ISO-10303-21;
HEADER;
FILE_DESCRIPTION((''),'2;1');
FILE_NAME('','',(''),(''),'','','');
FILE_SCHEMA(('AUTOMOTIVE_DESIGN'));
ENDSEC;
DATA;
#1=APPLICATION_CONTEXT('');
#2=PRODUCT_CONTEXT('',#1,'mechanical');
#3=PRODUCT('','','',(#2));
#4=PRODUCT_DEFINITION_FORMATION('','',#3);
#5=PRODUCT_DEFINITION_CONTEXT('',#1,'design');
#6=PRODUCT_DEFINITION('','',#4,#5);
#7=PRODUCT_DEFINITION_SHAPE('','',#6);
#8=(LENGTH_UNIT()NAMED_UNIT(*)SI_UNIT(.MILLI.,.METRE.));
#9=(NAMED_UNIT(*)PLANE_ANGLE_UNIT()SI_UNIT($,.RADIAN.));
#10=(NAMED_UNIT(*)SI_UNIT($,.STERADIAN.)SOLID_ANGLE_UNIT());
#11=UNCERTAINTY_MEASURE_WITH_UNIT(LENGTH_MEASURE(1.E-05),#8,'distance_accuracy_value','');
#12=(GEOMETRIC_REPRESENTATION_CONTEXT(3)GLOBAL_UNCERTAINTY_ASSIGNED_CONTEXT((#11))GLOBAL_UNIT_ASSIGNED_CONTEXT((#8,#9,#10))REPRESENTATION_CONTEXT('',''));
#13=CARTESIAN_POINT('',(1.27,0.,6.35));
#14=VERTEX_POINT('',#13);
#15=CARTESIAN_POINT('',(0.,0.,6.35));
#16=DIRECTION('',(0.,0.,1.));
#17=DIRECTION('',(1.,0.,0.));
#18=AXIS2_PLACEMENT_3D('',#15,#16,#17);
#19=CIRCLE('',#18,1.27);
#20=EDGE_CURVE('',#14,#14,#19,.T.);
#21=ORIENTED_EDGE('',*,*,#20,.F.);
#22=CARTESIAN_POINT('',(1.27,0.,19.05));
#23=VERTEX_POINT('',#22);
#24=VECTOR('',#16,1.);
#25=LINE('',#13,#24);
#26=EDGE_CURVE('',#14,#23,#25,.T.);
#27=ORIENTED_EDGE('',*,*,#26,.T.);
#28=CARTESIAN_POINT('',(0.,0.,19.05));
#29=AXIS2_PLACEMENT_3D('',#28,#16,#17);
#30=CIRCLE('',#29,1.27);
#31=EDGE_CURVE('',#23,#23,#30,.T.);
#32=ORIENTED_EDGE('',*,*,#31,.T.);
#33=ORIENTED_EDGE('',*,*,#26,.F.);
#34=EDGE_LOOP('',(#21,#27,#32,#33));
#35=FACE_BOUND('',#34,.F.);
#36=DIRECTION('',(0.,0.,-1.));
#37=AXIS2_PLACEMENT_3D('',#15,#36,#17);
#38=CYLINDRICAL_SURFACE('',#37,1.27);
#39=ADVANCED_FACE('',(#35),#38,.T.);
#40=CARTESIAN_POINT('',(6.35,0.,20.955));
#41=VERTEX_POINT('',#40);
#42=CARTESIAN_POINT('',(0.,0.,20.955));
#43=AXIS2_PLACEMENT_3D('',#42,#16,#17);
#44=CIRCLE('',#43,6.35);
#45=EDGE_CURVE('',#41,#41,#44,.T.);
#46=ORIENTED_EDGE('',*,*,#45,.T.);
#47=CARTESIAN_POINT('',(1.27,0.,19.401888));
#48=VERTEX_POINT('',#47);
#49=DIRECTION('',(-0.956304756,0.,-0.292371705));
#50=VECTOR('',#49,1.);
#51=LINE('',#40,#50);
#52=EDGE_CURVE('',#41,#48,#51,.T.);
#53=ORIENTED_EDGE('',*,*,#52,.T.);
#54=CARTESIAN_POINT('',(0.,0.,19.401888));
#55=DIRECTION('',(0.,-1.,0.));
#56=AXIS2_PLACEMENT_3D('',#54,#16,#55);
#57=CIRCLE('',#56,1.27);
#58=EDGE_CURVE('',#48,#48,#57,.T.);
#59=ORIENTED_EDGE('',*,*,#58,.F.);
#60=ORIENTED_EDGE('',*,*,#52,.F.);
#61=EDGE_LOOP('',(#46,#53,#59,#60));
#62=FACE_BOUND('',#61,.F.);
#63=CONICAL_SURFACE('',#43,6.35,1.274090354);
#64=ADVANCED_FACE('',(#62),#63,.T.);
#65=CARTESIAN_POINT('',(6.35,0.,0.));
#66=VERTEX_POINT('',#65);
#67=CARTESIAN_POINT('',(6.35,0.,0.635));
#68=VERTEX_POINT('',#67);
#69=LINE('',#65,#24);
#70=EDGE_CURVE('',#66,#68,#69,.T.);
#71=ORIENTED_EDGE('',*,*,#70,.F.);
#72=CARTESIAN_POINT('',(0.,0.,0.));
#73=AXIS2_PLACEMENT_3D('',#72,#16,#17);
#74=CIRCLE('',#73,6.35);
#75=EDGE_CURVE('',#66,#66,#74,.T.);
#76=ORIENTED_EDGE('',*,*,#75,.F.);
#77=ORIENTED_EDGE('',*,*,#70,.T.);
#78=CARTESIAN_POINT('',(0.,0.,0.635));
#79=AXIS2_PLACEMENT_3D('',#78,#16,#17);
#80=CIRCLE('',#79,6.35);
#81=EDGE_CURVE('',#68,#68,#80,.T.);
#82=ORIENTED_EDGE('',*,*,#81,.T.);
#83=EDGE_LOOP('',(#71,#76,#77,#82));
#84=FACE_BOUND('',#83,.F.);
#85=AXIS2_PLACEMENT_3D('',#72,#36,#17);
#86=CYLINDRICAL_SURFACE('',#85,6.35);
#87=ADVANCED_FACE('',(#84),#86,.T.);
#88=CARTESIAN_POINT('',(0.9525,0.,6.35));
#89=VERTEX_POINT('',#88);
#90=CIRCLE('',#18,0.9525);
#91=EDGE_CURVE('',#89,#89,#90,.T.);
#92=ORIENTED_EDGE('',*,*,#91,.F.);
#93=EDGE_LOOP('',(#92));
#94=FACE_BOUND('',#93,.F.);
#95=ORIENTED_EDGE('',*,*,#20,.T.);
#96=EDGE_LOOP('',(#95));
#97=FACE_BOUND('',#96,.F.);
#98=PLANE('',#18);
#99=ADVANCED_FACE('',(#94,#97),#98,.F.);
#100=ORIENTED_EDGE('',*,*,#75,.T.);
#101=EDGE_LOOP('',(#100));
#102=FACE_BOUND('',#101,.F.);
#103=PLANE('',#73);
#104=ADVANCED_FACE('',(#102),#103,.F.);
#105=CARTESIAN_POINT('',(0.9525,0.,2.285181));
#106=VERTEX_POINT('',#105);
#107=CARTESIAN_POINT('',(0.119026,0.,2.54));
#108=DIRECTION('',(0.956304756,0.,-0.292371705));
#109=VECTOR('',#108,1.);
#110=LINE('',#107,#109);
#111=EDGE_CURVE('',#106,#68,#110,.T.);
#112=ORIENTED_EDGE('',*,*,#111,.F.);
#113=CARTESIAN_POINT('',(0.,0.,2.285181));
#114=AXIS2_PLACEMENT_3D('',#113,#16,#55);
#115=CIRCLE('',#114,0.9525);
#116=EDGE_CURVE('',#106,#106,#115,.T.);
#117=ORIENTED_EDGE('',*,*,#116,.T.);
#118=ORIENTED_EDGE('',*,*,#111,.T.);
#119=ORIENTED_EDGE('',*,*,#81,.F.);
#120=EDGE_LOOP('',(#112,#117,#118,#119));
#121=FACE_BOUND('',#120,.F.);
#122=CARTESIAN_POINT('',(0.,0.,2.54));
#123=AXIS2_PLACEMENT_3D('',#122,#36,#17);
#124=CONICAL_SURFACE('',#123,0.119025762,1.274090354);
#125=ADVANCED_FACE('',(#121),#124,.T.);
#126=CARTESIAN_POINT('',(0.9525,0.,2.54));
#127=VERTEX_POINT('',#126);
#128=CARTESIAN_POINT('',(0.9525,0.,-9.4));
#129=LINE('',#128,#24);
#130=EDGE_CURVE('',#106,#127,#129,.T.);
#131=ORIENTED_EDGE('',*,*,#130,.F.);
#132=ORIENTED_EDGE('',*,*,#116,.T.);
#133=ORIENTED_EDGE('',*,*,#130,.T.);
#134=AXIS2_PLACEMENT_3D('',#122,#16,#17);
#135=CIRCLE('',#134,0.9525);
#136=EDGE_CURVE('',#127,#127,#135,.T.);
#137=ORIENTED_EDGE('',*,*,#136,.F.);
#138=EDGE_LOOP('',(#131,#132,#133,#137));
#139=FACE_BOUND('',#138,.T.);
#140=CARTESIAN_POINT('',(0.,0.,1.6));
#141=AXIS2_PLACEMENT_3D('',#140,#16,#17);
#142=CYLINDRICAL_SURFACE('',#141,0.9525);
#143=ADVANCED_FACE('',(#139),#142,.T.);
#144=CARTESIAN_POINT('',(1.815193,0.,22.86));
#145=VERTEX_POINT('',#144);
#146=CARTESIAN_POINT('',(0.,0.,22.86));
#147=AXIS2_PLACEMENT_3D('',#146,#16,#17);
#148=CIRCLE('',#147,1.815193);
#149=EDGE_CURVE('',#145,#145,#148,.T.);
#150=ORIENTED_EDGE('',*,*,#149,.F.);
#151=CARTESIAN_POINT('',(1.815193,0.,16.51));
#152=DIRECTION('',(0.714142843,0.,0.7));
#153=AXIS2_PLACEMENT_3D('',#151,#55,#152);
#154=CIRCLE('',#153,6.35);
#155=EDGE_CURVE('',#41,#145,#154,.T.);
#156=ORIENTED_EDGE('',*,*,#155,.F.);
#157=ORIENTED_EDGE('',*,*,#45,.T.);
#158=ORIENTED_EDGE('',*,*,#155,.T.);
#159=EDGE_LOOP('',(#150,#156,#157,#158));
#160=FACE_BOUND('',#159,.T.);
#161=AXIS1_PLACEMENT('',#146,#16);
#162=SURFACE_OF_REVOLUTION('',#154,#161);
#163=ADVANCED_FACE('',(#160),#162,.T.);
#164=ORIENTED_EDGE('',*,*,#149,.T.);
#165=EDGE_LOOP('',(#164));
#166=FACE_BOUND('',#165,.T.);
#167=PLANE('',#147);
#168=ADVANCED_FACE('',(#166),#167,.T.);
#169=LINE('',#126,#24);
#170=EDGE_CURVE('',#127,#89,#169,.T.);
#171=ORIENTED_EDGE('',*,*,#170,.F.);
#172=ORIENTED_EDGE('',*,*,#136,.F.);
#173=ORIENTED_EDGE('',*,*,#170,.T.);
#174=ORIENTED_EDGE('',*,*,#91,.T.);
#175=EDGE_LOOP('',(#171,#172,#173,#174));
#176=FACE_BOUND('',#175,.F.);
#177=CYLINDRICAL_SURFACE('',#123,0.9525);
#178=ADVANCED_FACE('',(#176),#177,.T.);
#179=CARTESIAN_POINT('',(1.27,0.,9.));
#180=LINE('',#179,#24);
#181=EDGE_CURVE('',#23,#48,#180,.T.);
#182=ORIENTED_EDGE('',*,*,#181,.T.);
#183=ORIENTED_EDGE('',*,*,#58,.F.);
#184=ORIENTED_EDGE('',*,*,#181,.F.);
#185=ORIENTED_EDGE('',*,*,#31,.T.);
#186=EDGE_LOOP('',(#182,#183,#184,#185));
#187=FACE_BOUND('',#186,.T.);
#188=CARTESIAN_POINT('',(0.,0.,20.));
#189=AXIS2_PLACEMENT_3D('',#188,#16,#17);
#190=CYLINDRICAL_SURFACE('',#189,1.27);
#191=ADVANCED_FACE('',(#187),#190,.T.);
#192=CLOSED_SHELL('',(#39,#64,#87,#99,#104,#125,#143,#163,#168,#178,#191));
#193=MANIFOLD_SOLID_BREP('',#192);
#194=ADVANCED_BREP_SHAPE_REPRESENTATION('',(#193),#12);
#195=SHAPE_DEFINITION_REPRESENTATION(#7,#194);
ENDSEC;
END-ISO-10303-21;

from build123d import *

# Parameters (mm, degrees)
F0_R        = 6.35
F1_DEPTH    = 2.54
F2_R        = 0.9525
F3_DEPTH    = 3.81
F4_R        = 1.27
F5_DEPTH    = 12.7
F6_R        = 6.35
F7_DEPTH    = 3.81
F8_S5_R     = 0.9525
F8_T6_DEPTH = 11
F9_S5_R     = 1.27
F9_T6_DEPTH = 11


# Not quite as in the source:
# - a fillet or chamfer that OpenCascade refuses, or shapes differently, is made with other operations: its cross-section is extruded or revolved along the edge and cut away or added


with BuildPart() as f1:
    # F0 (on Top) → F1 (new body)
    with BuildSketch(Plane.XY):
        Circle(F0_R)
    extrude(amount=F1_DEPTH)

    # F2 (on face) → F3 (join)
    with BuildSketch(Plane.XY.offset(2.54)):
        Circle(F2_R)
    extrude(amount=F3_DEPTH)

    # F4 (on face) → F5 (join)
    with BuildSketch(Plane.XY.offset(6.35)):
        Circle(F4_R)
    extrude(amount=F5_DEPTH)

    # F6 (on face) → F7 (join)
    with BuildSketch(Plane.XY.offset(19.05)):
        Circle(F6_R)
    extrude(amount=F7_DEPTH)

    # F8: chamfer of 1.905 x 6.2309742382 on 1 edges, made by hand


with BuildPart() as f8_tool2:
    # F8_s3 → F8_t4 (revolve)
    with BuildSketch(Plane.XZ):
        Polygon((0.1190257618, 2.54), (6.35, 0.635), (6.35, 2.54), align=None)
    revolve(axis=Axis((0, 0, 2.54), (0, 0, 1)))

    # F8_s5 → F8_t6 (cut, symmetric)
    with BuildSketch(Plane.XY.offset(1.6)):
        Circle(F8_S5_R)
    extrude(amount=F8_T6_DEPTH, both=True, mode=Mode.SUBTRACT)


with BuildPart() as f1_1:
    add(f1.part)

    # F8_t1: cut F8_tool2
    add(f8_tool2.part, mode=Mode.SUBTRACT)

    # F9: chamfer of 1.905 x 6.2309742382 on 1 edges, made by hand


with BuildPart() as f9_tool2:
    # F9_s3 → F9_t4 (revolve)
    with BuildSketch(Plane.XZ):
        Polygon((6.35, 20.955), (0.1190257618, 19.05), (6.35, 19.05), align=None)
    revolve(axis=Axis((0, 0, 19.05), (0, 0, 1)))

    # F9_s5 → F9_t6 (cut, symmetric)
    with BuildSketch(Plane.XY.offset(20)):
        Circle(F9_S5_R)
    extrude(amount=F9_T6_DEPTH, both=True, mode=Mode.SUBTRACT)


with BuildPart() as f1_2:
    add(f1_1.part)

    # F9_t1: cut F9_tool2
    add(f9_tool2.part, mode=Mode.SUBTRACT)

    # F10: fillet of radius 6.35 on 1 edges, made by hand

    # F10_s1 → F10_t2 (revolve, cut)
    with BuildSketch(Plane.XZ):
        with BuildLine():
            ThreePointArc((6.35, 20.955), (4.2745373727, 22.3644107304), (1.8151929479, 22.86))
            Line((1.8151929479, 22.86), (6.35, 22.86))
            Line((6.35, 22.86), (6.35, 20.955))
        make_face()
    revolve(axis=Axis((0, 0, 22.86), (0, 0, 1)), mode=Mode.SUBTRACT)


solid = f1_2.part
